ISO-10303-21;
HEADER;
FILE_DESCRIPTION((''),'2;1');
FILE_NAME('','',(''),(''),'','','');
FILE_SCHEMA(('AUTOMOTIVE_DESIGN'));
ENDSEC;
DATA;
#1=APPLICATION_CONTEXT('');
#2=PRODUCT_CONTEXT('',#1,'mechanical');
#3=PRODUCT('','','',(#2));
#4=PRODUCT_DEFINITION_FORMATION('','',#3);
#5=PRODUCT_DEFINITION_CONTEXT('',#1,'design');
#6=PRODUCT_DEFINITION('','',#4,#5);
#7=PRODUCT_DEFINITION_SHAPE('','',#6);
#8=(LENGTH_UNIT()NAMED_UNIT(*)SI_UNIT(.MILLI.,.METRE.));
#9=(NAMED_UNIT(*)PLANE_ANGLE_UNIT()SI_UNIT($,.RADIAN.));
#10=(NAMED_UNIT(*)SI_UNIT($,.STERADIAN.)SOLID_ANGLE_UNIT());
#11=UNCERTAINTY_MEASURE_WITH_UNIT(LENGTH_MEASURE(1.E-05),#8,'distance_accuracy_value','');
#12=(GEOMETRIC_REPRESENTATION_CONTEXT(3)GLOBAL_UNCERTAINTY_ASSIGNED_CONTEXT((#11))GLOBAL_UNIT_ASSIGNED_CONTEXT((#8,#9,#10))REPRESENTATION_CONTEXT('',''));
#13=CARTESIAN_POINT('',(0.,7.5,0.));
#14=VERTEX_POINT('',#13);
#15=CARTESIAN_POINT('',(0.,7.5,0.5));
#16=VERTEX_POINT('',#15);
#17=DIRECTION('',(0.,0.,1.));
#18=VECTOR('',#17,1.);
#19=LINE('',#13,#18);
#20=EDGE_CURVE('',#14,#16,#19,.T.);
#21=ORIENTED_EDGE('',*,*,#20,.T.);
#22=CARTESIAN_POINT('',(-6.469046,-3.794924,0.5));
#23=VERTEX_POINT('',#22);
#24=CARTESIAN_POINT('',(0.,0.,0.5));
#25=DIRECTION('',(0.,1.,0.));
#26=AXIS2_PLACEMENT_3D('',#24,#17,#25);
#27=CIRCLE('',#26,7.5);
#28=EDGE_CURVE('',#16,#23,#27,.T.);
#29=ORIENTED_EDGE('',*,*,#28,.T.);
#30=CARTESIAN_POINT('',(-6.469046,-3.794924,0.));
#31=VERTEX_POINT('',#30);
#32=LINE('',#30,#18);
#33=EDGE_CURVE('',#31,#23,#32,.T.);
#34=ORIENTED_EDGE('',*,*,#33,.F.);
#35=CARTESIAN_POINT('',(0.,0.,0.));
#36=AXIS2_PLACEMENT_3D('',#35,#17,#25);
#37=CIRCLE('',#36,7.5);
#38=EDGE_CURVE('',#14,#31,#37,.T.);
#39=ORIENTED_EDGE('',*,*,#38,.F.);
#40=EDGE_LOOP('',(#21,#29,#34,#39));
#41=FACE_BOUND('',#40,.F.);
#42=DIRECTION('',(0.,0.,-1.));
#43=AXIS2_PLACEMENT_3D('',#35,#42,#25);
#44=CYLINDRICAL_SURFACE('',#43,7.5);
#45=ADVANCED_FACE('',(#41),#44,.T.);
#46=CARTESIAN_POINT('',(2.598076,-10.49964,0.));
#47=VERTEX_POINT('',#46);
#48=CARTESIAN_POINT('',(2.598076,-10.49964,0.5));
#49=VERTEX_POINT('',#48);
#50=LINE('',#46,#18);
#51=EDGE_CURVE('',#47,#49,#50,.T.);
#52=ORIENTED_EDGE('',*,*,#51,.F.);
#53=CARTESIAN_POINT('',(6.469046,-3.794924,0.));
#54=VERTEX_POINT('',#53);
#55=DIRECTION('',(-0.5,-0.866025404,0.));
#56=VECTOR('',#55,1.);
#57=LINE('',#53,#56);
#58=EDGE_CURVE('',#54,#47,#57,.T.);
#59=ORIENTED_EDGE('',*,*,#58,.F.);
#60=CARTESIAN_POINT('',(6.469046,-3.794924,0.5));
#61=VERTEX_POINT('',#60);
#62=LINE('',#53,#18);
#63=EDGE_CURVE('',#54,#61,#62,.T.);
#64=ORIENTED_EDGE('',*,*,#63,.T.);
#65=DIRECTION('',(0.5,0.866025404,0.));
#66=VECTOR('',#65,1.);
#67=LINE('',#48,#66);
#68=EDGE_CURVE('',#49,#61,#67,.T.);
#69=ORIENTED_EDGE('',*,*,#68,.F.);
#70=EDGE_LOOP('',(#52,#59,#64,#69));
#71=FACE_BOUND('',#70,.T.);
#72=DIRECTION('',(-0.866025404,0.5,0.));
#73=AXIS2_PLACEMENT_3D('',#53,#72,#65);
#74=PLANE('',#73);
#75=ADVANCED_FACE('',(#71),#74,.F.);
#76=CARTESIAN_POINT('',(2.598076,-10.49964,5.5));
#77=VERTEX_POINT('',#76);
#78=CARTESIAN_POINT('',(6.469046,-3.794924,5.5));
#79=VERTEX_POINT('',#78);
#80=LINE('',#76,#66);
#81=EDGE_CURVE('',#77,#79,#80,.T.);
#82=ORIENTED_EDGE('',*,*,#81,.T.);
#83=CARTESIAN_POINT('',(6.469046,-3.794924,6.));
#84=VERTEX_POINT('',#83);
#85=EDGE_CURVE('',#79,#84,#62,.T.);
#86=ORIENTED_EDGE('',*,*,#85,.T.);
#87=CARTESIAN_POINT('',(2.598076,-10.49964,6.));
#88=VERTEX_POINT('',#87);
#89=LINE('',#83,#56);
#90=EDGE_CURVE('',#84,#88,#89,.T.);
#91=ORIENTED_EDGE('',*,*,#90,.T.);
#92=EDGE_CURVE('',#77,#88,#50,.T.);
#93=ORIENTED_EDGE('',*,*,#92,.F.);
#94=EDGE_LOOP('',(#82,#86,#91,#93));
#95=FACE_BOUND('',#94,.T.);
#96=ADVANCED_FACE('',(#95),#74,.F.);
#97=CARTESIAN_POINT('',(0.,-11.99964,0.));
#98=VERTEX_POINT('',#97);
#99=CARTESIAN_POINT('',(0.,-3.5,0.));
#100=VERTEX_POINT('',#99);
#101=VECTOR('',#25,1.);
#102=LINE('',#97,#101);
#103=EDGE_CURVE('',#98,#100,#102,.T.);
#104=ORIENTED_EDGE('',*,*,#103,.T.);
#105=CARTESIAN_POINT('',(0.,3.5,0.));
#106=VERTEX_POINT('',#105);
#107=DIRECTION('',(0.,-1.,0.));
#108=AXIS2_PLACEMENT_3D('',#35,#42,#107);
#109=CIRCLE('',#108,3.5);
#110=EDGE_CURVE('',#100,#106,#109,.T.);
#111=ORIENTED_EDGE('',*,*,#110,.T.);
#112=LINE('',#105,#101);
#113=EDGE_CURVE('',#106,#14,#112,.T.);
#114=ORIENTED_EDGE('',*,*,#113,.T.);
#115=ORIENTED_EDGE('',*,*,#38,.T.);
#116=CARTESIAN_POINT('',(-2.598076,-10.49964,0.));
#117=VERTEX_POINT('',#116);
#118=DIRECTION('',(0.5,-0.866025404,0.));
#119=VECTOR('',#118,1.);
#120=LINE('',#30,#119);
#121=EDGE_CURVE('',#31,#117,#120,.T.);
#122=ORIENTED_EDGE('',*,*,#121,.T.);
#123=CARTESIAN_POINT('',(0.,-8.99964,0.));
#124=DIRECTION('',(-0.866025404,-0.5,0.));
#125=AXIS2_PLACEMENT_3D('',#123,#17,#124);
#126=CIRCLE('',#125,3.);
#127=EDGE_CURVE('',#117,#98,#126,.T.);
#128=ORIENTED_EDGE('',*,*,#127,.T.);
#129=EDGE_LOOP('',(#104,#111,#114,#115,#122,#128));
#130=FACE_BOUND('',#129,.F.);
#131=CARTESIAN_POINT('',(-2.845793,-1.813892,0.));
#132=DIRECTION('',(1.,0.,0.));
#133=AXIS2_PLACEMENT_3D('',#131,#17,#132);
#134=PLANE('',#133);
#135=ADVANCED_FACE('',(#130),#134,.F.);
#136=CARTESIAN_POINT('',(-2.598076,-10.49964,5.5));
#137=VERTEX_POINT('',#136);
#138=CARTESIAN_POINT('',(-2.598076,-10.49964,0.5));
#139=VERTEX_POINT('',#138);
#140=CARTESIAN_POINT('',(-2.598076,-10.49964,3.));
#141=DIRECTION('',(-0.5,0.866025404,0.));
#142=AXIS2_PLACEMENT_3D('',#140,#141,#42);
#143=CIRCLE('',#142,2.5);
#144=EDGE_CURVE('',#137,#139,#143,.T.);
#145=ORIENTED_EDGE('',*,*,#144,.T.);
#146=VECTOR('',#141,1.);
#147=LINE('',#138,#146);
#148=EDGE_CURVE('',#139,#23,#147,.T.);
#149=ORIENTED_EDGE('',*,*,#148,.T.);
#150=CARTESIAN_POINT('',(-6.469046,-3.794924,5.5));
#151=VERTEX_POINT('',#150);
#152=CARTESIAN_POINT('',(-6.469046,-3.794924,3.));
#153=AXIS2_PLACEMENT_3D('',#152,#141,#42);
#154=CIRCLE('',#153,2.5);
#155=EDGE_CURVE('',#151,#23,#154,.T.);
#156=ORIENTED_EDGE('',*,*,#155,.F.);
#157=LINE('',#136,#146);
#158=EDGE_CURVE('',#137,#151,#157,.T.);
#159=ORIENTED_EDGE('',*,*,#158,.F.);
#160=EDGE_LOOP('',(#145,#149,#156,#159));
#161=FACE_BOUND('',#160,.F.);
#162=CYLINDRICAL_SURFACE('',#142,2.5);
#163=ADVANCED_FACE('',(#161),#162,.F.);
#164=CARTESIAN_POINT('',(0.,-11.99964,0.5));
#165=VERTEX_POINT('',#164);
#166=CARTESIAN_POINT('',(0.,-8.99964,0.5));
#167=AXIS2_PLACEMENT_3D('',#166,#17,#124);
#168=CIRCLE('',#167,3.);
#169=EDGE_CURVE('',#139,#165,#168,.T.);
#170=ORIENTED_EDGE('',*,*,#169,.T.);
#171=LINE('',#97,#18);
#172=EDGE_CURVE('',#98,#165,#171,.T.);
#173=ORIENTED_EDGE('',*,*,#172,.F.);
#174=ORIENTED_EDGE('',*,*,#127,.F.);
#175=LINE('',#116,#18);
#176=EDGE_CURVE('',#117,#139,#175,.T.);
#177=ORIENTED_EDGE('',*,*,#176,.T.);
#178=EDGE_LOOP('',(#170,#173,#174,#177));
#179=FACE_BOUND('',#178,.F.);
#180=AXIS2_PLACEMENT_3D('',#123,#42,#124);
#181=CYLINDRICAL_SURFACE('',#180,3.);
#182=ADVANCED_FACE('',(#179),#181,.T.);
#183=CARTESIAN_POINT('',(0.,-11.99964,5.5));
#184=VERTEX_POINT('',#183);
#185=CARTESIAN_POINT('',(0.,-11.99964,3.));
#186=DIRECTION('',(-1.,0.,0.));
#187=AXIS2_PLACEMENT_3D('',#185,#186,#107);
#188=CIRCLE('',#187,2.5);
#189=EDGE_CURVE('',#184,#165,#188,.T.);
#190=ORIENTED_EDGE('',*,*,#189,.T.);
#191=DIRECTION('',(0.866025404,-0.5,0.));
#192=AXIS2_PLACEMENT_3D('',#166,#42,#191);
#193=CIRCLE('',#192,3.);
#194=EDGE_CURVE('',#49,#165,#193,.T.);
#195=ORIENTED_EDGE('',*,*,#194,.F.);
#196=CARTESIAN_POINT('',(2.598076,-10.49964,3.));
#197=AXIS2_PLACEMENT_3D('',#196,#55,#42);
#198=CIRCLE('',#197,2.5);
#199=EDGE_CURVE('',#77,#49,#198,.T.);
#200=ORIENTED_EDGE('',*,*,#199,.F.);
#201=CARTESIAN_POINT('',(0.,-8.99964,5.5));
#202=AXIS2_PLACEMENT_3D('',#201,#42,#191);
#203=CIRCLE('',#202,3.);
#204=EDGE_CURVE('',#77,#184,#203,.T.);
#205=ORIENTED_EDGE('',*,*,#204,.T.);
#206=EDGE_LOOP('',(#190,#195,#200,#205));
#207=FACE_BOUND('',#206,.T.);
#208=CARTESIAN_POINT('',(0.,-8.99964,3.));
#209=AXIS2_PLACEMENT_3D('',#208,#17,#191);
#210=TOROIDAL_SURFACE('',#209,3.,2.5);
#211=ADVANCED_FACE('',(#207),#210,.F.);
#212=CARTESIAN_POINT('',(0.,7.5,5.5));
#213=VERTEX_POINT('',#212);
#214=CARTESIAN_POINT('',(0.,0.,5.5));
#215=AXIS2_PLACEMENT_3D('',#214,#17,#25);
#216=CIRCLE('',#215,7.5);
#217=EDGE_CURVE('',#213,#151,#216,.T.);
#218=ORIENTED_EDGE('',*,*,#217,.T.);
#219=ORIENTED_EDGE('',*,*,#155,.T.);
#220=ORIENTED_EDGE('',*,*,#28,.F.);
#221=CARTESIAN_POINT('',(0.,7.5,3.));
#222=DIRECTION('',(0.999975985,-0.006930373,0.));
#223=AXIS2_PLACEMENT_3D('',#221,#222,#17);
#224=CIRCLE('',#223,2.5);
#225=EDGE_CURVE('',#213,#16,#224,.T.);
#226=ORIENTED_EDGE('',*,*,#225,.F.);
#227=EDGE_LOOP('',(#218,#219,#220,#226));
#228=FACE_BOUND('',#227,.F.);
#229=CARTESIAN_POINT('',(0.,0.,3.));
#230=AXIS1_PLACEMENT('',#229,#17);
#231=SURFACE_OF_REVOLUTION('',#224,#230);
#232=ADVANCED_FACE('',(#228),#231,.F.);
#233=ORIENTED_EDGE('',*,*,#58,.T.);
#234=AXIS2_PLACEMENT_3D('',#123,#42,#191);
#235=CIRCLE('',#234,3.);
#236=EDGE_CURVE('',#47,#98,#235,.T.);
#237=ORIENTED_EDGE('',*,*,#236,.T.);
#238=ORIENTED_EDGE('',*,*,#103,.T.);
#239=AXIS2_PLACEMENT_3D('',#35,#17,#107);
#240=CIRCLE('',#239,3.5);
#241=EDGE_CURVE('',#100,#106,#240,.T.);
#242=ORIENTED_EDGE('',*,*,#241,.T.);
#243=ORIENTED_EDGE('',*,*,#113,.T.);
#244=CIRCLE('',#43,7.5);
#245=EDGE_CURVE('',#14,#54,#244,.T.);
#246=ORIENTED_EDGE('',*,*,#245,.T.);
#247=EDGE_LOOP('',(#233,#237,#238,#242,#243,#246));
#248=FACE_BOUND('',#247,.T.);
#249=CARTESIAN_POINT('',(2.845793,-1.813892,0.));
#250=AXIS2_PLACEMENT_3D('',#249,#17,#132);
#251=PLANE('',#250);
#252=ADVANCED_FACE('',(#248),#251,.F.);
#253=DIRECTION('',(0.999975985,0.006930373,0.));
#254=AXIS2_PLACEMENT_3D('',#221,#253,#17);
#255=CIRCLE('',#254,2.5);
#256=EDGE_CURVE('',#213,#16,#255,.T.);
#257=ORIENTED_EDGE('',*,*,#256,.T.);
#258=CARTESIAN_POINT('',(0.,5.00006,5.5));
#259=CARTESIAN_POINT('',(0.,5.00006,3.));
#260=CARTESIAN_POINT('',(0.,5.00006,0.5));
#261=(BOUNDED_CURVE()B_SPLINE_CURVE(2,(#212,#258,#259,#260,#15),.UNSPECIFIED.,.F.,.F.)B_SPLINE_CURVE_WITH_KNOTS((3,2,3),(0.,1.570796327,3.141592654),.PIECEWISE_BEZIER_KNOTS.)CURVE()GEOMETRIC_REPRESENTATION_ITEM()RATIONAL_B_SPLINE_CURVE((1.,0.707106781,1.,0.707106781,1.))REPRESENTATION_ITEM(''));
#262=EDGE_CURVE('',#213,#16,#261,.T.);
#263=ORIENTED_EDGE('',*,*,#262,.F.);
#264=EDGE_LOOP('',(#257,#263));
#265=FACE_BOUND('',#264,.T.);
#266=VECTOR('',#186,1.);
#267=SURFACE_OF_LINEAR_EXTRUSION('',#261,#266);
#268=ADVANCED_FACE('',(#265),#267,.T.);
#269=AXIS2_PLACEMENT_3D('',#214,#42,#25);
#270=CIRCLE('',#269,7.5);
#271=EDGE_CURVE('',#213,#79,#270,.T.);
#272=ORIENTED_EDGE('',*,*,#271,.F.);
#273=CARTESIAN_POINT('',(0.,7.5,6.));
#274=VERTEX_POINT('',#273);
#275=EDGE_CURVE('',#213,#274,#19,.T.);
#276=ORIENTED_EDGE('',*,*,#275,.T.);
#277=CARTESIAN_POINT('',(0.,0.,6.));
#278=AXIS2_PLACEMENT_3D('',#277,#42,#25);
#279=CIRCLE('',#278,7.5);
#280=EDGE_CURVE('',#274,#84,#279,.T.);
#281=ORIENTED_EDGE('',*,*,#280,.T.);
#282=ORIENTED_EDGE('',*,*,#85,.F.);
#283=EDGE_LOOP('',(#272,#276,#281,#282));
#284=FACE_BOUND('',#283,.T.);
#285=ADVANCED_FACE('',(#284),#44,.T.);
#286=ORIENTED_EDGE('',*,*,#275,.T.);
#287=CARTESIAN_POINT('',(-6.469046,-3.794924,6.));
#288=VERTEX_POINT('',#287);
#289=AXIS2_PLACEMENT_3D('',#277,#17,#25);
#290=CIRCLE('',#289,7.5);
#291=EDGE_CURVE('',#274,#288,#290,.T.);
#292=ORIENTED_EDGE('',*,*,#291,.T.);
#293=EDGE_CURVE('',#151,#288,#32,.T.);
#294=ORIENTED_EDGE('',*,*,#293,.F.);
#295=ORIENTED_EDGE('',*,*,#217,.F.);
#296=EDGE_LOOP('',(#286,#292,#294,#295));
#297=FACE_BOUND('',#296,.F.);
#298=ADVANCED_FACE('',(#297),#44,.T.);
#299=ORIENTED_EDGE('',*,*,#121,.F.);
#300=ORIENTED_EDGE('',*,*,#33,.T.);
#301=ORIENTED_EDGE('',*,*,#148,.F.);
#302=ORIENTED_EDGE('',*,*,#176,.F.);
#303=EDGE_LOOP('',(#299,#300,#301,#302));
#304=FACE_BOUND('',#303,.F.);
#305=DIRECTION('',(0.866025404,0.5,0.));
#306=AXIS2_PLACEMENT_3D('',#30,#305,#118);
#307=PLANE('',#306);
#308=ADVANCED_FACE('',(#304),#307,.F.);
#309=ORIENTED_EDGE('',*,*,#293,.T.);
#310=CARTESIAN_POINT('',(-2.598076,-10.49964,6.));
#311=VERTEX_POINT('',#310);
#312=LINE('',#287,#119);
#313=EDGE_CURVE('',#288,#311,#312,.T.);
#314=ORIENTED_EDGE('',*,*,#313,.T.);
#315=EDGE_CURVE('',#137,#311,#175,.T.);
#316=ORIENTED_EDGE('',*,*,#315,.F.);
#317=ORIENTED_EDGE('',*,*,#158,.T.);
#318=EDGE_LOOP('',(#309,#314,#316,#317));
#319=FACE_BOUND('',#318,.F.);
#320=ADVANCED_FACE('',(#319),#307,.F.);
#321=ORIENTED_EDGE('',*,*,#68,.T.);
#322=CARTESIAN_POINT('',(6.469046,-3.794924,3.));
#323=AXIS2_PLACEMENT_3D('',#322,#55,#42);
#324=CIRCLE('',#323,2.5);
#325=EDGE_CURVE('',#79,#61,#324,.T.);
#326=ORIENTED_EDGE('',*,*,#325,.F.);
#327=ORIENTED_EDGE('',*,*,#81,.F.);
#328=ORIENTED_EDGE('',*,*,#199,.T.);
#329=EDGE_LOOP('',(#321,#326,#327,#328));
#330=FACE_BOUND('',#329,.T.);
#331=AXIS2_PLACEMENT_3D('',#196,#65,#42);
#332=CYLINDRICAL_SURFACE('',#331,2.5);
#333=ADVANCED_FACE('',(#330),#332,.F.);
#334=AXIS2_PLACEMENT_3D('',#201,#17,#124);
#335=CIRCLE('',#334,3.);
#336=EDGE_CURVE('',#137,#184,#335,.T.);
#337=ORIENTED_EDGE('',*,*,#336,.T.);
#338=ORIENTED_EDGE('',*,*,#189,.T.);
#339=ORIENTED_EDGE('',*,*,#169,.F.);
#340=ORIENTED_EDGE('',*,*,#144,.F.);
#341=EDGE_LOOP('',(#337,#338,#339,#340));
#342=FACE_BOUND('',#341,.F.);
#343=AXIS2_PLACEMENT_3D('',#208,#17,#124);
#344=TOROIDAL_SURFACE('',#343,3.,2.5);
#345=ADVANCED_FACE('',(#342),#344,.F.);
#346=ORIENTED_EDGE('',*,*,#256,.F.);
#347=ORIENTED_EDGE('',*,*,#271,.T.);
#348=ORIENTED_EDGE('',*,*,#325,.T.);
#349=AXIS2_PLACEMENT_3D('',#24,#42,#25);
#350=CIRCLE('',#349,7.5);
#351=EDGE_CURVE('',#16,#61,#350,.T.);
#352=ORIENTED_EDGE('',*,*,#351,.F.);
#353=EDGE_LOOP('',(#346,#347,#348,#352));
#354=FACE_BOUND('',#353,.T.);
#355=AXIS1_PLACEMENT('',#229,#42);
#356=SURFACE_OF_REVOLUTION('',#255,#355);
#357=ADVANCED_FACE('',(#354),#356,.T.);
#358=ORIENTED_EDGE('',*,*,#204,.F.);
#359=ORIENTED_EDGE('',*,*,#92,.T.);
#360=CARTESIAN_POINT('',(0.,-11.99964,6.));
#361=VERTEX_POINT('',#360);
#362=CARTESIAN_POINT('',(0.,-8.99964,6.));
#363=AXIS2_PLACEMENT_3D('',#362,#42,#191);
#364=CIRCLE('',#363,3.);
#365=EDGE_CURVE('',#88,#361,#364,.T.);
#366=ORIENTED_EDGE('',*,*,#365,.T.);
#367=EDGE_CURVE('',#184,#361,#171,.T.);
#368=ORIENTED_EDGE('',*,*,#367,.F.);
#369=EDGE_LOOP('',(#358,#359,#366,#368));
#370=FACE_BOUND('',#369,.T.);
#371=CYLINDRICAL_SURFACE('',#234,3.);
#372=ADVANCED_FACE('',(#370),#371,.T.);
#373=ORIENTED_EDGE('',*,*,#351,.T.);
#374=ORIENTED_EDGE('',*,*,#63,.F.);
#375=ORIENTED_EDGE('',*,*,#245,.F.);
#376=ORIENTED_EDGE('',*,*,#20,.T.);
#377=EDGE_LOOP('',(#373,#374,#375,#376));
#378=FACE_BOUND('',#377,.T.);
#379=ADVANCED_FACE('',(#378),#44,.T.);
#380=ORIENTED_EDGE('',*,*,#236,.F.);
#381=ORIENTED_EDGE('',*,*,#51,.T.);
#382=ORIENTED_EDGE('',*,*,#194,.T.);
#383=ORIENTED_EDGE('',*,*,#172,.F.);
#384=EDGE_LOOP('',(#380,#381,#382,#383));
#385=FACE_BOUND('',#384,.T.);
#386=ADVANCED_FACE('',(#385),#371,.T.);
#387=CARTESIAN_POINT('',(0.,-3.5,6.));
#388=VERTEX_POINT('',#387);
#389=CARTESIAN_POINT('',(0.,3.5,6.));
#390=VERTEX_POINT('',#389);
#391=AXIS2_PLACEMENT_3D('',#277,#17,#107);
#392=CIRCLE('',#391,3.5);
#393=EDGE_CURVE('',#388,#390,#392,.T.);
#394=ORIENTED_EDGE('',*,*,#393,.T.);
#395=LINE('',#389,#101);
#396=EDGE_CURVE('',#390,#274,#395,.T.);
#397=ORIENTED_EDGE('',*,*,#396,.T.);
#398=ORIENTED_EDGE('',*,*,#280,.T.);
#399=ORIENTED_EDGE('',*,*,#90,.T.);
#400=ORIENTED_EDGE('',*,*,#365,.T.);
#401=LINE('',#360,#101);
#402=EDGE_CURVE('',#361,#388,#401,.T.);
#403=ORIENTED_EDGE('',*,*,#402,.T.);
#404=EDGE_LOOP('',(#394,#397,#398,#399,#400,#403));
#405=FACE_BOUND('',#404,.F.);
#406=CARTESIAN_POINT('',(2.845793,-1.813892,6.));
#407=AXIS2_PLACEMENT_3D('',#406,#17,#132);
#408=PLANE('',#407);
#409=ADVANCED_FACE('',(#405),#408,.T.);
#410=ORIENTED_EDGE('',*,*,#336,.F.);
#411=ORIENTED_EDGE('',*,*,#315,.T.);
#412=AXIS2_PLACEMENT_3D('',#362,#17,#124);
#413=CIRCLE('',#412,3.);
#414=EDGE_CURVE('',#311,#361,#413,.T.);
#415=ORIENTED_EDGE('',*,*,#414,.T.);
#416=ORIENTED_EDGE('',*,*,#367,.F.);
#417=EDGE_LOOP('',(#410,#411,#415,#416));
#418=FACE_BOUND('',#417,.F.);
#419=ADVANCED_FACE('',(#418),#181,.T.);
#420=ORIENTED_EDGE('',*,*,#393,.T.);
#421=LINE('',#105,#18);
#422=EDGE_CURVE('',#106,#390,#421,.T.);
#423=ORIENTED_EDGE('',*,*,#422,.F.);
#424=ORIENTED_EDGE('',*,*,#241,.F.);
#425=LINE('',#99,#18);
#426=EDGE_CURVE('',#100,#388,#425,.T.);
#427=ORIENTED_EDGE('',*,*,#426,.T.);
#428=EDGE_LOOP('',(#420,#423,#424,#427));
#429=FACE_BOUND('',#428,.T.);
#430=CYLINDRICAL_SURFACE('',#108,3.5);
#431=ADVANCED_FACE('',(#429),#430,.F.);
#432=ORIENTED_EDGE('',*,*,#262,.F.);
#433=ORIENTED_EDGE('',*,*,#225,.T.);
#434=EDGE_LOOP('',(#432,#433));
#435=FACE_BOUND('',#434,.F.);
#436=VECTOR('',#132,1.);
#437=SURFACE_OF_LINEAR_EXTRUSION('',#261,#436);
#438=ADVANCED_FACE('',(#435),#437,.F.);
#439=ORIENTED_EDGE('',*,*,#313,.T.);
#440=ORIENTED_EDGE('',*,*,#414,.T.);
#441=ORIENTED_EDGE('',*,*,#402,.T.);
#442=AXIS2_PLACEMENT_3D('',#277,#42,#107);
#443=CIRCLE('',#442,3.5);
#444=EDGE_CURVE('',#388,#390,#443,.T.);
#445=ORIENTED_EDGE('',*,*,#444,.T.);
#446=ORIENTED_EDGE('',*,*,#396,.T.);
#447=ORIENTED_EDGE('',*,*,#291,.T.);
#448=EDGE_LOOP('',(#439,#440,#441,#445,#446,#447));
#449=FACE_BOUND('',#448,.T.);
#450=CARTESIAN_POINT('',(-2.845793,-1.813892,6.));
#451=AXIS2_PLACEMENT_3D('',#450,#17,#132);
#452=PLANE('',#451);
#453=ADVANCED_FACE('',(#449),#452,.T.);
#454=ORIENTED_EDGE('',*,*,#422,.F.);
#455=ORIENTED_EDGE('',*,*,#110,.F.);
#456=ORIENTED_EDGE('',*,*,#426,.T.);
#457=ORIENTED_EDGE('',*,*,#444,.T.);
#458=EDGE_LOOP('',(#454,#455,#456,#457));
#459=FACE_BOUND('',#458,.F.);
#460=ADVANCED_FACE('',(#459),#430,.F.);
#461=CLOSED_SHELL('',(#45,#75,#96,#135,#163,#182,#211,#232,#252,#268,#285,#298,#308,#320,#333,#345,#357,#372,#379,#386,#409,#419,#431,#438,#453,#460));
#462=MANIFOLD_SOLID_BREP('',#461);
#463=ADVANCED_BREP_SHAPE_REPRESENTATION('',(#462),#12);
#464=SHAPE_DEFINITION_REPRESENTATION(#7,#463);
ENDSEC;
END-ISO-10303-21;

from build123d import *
from build123d import SkipClean  # not in build123d's __all__

# Parameters (mm, degrees)
F1_DEPTH = 6
F9_DEPTH = 25


with BuildPart() as f1:
    # F0 (on Top) → F1 (new body)
    with BuildSketch(Plane.XY):
        with BuildLine():
            Line((0, 3.5), (0, 7.5))
            ThreePointArc((0, 7.5), (-6.5081460588, 3.7274703054), (-6.4690456472, -3.7949240327))
            Line((-6.4690456472, -3.7949240327), (-2.5980762114, -10.4996397702))
            ThreePointArc((-2.5980762114, -10.4996397702), (-1.5, -11.5977159815), (0, -11.9996397702))
            Line((0, -11.9996397702), (0, -3.5))
            ThreePointArc((0, -3.5), (-3.5, 0), (0, 3.5))
        make_face()
    extrude(amount=F1_DEPTH)

    # F4: sweep along a path in F4_path
    with BuildLine(Plane(origin=(-2.5980762114, -10.4996397702, 0), x_dir=(0.5, -0.8660254038, 0), z_dir=(0.8660254038, 0.5, 0))) as f4_path:
        Line((0, 0), (-7.7419388717, 0))
    # F3 (on face) → F4 (sweep, cut)
    with BuildSketch(Plane(origin=(3.8969583329, -6.7497298276, 0), x_dir=(0.8660254038, 0.5, 0), z_dir=(0.5, -0.8660254038, 0))):
        with BuildLine():
            ThreePointArc((-7.4998198851, 0.5), (-4.9998198851, 3), (-7.4998198851, 5.5))
            Line((-7.4998198851, 5.5), (-7.4998198851, 0.5))
        make_face()
    sweep(path=f4_path.line, mode=Mode.SUBTRACT)

    # F7: sweep along a path in F0
    with BuildLine(Plane.XY) as f7_path:
        ThreePointArc((0, 7.5), (-6.5081460588, 3.7274703054), (-6.4690456472, -3.7949240327))
    # F6 (on face) → F7 (sweep, cut)
    with BuildSketch(Plane(origin=(0.0259888971, -0.0450140902, 0), x_dir=(-0.8660254038, -0.5, 0), z_dir=(-0.5, 0.8660254038, 0))):
        with BuildLine():
            ThreePointArc((7.4998198851, 5.5), (4.9998198851, 3), (7.4998198851, 0.5))
            Line((7.4998198851, 0.5), (7.4998198851, 5.5))
        make_face()
    sweep(path=f7_path.line, mode=Mode.SUBTRACT)

    # F8 (on face) → F9 (cut)
    with BuildSketch(Plane.YZ):
        with BuildLine():
            Line((7.5, 0.5), (7.5, 5.5))
            add(Edge.make_bspline(
                [(7.5, 5.5), (5.0000600383, 5.5), (5.0000600383, 3), (5.0000600383, 0.5), (7.5, 0.5)],
                knots=[0, 0, 0, 1.5707963268, 1.5707963268, 3.1415926536, 3.1415926536, 3.1415926536], degree=2, weights=[1, 0.7071067812, 1, 0.7071067812, 1]))
        make_face()
    extrude(amount=-F9_DEPTH, mode=Mode.SUBTRACT)

    # F11: sweep along a path in F0
    with BuildLine(Plane.XY) as f11_path:
        ThreePointArc((-2.5980762114, -10.4996397702), (-1.5, -11.5977159815), (0, -11.9996397702))
    # F10 (on face) → F11 (sweep, cut)
    with BuildSketch(Plane(origin=(3.8969583329, -6.7497298276, 0), x_dir=(-0.8660254038, -0.5, 0), z_dir=(-0.5, 0.8660254038, 0))):
        with BuildLine():
            ThreePointArc((7.4998198851, 5.5), (4.9998198851, 3), (7.4998198851, 0.5))
            Line((7.4998198851, 0.5), (7.4998198851, 5.5))
        make_face()
    sweep(path=f11_path.line, mode=Mode.SUBTRACT)

    # F12: F1 across plane


with BuildPart() as f1_1:
    add(f1.part, clean=False)
    with SkipClean():  # cleaning this boolean's faces spoils the solid; the shape is the same uncleaned
        add(f1.part.mirror(Plane.YZ), clean=False)


solid = f1_1.part
